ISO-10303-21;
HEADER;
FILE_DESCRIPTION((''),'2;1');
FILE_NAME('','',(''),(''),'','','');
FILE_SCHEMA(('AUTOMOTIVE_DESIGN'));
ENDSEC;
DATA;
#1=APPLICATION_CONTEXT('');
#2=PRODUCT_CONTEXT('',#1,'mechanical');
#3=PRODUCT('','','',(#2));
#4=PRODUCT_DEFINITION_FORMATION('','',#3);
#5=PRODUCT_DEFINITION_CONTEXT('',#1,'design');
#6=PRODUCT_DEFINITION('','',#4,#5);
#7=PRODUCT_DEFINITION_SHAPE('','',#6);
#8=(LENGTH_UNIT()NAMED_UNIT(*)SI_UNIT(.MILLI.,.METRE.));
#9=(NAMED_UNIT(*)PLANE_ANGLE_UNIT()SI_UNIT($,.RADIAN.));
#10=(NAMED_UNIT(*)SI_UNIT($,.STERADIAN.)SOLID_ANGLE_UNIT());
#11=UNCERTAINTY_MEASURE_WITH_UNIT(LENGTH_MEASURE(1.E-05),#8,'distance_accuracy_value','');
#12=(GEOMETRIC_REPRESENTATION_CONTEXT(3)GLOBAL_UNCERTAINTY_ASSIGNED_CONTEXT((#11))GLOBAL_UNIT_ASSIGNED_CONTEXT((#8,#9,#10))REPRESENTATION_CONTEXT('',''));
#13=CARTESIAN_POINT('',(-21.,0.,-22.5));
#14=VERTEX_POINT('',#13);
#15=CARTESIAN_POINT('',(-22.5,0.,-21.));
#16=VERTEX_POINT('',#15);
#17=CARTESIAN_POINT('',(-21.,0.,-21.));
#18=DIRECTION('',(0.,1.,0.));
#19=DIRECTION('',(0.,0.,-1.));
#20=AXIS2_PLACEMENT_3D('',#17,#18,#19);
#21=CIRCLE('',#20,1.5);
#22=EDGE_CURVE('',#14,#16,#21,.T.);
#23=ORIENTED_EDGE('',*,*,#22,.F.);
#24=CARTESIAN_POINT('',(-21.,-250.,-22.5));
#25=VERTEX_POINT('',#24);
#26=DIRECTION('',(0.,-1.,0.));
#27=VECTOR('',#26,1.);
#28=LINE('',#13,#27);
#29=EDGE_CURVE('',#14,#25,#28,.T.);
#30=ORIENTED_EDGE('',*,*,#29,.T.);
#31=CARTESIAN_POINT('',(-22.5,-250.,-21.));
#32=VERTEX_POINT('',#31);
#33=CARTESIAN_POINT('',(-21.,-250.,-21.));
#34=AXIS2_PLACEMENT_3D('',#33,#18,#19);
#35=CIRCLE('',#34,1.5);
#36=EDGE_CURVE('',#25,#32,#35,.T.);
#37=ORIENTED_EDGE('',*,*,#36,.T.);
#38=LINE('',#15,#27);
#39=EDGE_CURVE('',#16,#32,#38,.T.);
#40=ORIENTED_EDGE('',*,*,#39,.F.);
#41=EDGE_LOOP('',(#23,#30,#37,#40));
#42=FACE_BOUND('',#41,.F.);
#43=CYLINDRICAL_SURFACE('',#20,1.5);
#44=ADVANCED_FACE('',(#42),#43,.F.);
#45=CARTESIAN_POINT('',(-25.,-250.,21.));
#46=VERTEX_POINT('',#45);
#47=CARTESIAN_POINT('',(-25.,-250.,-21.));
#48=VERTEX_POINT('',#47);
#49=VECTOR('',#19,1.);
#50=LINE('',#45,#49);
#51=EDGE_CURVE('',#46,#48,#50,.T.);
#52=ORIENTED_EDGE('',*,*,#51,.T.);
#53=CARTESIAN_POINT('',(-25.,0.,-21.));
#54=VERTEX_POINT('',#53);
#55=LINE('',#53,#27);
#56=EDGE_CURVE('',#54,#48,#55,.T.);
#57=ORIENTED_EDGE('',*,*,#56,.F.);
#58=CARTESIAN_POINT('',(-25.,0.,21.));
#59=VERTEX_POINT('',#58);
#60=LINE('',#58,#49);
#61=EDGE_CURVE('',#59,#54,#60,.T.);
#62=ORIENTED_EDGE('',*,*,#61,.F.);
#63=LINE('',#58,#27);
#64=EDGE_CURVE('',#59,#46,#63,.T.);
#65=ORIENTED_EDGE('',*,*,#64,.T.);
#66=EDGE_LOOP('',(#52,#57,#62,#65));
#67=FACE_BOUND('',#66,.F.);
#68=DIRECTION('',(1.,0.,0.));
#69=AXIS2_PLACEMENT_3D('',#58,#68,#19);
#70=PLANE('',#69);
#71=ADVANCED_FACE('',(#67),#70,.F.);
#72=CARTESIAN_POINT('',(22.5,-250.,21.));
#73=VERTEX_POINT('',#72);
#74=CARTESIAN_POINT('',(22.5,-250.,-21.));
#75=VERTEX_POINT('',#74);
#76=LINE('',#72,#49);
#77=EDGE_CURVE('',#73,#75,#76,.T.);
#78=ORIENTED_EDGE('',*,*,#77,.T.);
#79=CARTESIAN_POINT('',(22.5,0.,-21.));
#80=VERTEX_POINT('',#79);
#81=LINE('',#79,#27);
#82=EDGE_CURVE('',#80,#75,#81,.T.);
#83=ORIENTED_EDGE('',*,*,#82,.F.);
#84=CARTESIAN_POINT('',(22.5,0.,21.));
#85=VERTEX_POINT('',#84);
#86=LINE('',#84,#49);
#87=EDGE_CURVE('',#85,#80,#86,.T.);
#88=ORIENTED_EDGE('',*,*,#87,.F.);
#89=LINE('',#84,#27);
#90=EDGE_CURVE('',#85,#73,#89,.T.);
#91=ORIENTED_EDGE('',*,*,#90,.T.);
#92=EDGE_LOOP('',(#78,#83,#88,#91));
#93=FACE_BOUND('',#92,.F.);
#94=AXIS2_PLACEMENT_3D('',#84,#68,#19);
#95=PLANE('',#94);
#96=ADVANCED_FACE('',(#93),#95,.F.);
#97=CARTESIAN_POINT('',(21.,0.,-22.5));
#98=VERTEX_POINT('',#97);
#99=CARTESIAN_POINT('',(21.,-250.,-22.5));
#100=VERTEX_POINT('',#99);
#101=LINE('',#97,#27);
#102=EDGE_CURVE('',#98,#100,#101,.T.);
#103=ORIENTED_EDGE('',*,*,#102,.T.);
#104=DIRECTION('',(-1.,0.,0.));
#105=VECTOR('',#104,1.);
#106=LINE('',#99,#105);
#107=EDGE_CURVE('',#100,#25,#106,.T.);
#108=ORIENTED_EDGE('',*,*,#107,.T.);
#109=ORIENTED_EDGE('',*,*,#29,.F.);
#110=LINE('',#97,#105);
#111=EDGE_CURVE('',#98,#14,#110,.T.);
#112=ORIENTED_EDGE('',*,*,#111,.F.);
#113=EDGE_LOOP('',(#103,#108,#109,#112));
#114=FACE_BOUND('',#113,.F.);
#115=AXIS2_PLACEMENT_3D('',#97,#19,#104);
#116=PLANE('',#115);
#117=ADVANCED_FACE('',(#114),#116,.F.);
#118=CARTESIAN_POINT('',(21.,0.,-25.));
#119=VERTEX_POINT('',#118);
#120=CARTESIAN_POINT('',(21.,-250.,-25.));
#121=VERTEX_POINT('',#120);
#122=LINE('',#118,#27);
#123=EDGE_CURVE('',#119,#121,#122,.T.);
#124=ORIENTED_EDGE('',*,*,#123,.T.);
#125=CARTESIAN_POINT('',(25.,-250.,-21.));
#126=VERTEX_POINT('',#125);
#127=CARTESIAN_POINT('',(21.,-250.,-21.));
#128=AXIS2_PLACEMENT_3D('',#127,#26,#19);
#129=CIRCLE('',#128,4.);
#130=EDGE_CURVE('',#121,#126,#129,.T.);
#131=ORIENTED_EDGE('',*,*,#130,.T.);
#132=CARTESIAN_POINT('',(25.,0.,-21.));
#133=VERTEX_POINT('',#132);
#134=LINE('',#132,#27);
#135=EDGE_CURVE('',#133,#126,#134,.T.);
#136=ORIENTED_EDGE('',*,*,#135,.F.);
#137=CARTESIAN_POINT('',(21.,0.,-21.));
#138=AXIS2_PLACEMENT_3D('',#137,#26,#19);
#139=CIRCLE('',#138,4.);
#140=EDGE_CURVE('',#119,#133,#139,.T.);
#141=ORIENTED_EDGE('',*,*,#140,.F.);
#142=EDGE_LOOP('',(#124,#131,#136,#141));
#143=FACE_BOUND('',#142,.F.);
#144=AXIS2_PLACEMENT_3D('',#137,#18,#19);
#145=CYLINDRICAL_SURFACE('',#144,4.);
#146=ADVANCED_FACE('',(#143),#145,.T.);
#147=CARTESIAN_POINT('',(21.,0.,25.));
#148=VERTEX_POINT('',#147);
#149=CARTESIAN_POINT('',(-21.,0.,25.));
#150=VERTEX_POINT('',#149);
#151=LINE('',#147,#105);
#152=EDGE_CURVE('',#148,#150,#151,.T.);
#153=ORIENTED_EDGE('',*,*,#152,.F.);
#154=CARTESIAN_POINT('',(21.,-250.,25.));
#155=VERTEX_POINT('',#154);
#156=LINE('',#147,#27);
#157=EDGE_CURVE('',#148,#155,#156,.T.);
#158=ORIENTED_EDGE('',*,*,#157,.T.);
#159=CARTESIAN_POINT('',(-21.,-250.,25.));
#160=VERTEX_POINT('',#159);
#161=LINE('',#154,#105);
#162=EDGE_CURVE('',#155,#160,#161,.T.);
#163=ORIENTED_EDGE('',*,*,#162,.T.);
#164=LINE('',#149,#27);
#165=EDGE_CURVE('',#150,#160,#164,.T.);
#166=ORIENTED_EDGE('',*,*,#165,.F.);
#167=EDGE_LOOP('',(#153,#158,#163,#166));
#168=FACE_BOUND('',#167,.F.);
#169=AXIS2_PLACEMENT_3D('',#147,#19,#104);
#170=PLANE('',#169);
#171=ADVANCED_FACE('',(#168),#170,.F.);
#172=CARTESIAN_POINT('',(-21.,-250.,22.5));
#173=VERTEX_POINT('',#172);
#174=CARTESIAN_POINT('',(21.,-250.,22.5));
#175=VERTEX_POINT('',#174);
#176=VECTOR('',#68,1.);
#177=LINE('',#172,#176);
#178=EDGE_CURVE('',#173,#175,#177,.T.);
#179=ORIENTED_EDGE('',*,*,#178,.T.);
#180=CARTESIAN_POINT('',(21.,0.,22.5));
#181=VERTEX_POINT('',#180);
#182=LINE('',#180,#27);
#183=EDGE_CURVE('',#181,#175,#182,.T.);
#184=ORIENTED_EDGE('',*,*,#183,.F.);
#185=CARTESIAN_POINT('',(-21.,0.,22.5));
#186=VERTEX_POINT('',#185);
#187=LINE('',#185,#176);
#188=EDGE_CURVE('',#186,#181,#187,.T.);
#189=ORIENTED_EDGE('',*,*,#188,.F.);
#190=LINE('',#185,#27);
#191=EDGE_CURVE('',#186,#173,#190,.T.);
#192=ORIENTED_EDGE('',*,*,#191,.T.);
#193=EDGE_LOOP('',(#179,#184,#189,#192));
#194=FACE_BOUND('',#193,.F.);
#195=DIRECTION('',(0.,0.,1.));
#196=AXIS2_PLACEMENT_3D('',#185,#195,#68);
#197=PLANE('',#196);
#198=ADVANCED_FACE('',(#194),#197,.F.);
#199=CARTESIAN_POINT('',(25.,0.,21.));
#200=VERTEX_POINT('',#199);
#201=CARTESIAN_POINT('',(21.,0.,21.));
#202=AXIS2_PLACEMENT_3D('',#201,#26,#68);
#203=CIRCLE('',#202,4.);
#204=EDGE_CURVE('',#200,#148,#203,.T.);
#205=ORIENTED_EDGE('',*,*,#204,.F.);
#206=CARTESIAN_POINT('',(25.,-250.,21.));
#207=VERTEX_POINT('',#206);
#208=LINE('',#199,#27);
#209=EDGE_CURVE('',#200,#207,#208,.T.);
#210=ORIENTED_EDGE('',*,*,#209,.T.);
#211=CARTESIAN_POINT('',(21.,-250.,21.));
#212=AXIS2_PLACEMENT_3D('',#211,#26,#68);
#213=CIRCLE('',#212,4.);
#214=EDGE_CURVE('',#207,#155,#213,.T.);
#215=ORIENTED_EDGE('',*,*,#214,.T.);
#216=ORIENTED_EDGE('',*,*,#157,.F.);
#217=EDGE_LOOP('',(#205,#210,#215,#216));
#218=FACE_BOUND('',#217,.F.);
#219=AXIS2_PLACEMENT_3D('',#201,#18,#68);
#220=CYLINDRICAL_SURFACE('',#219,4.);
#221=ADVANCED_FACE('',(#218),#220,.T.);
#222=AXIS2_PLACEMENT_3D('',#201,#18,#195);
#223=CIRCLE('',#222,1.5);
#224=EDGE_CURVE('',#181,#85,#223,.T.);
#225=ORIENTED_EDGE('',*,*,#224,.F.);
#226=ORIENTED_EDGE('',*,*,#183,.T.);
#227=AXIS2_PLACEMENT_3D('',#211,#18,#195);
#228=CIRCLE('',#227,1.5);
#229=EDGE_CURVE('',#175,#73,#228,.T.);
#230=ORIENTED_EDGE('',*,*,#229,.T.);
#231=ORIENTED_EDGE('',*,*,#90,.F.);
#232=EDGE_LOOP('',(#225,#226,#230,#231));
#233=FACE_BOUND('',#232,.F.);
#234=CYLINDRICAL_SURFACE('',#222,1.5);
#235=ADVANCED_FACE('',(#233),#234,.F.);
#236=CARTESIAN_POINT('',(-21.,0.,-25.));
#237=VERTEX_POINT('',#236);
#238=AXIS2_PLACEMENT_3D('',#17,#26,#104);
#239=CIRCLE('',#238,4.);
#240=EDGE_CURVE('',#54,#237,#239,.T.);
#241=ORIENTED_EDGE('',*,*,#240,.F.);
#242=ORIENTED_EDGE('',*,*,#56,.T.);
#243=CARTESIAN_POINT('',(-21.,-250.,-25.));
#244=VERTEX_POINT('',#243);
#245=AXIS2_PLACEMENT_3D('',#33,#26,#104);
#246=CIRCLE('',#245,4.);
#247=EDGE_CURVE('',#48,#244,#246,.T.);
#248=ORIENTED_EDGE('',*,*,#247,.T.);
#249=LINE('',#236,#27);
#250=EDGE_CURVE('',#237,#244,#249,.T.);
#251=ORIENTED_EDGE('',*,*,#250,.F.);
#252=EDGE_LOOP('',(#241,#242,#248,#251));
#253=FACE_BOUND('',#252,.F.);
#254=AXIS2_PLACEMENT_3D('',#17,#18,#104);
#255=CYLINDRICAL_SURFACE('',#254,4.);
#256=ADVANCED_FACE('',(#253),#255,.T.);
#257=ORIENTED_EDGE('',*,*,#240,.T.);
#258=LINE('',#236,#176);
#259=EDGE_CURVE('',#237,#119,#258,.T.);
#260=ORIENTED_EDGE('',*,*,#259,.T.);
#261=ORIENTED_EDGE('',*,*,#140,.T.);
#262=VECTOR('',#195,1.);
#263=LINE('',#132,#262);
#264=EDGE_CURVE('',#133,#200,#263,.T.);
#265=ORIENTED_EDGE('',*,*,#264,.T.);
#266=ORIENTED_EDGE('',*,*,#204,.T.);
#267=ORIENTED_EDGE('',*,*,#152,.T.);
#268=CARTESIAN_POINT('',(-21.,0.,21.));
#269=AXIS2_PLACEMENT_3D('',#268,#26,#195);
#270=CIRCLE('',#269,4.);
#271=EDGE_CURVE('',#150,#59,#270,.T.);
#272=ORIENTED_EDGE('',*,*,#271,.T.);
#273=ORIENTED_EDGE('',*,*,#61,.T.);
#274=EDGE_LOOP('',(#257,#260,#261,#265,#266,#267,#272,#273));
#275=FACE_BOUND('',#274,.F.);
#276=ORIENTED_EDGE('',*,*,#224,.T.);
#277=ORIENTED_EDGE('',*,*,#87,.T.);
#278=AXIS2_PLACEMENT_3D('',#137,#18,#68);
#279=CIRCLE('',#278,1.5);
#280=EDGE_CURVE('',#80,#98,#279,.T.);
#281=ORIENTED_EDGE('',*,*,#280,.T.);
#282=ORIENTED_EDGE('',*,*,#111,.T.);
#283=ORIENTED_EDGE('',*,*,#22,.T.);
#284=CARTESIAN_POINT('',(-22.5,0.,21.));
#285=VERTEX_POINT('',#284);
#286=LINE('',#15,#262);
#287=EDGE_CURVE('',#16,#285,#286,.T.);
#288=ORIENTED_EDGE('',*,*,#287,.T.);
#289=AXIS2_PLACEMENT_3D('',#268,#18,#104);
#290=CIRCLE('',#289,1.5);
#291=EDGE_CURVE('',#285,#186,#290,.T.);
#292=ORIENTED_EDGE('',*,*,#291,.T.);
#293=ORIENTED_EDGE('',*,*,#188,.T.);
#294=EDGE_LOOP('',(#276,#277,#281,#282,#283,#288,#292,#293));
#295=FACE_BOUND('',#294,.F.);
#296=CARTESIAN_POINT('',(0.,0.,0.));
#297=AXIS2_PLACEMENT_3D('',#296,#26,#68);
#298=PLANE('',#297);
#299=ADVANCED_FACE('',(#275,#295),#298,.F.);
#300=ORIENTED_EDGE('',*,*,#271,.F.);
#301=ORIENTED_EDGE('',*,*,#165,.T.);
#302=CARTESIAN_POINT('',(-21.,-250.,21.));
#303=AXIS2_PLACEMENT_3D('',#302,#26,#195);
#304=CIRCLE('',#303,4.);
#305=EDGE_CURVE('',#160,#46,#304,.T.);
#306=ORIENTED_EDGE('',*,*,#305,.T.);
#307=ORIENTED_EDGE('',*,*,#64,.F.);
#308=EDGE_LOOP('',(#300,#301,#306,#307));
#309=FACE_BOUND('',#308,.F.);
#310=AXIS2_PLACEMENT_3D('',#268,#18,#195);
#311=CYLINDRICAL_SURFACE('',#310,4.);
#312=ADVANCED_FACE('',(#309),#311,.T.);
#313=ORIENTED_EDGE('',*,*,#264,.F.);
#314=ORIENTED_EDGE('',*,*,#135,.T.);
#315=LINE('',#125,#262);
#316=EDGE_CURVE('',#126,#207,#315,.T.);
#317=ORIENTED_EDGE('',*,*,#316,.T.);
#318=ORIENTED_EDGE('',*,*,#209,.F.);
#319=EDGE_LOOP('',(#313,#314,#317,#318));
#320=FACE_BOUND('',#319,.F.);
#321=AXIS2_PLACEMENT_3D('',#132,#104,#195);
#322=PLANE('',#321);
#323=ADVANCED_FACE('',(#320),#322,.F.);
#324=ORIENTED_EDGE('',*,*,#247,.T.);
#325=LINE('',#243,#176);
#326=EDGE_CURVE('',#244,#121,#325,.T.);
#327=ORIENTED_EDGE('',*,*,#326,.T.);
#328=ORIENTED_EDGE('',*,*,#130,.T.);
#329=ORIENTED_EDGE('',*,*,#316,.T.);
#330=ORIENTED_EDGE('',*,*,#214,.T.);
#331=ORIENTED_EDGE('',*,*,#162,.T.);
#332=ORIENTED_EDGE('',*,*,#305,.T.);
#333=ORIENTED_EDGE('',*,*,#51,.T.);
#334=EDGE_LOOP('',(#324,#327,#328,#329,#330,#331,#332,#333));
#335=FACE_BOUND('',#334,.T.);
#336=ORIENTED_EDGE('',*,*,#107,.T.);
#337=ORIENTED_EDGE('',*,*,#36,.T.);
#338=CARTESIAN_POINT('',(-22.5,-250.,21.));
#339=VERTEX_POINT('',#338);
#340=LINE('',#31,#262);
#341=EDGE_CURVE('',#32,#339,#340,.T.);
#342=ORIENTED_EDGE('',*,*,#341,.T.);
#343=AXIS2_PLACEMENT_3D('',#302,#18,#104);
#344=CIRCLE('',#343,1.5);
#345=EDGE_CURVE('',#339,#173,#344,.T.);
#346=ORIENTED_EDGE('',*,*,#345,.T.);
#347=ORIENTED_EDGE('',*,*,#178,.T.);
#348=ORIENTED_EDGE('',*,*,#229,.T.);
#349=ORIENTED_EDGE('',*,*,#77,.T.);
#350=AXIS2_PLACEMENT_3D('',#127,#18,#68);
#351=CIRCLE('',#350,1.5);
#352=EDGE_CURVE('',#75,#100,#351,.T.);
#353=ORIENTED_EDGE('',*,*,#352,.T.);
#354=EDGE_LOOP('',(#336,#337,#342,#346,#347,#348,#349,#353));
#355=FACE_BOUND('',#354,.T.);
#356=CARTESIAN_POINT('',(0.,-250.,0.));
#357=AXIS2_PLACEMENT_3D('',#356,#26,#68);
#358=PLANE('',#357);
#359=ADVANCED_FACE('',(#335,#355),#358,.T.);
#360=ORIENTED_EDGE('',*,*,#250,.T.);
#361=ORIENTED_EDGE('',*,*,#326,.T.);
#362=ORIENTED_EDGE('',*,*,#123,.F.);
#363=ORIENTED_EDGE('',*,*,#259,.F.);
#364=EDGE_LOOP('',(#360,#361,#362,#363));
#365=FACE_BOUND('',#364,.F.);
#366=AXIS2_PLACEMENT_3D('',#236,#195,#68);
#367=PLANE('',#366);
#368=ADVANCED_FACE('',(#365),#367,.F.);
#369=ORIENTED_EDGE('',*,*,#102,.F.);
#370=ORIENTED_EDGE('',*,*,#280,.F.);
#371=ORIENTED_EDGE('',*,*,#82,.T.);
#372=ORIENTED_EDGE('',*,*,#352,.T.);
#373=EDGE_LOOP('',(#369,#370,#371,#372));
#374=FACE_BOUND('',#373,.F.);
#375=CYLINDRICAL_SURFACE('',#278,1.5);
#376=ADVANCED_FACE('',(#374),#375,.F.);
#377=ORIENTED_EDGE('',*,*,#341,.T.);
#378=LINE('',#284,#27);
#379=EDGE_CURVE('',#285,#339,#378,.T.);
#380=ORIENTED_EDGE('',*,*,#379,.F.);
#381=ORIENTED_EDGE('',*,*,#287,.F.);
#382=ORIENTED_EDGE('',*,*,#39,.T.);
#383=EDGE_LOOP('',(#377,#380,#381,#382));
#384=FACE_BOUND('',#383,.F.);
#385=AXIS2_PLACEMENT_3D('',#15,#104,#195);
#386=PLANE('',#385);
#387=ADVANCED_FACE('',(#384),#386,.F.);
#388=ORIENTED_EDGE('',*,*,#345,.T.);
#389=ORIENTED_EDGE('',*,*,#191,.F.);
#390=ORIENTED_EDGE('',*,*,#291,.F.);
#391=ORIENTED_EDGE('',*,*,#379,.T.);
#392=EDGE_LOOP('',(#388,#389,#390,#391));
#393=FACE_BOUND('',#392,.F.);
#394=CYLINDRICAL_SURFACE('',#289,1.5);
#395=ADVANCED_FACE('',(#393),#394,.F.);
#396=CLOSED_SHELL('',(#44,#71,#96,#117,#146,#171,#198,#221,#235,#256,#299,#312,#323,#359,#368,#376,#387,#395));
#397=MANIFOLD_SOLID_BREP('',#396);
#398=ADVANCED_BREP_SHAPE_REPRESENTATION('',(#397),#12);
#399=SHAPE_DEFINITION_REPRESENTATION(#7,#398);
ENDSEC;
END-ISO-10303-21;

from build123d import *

# Parameters (mm, degrees)
F1_DEPTH = 250


# Not quite as in the source:
# - a feature names something its author has since deleted; it is built from what else it names


with BuildPart() as f1:
    # F0 (on Front) → F1 (new body)
    with BuildSketch(Plane.XZ):
        with BuildLine():
            Line((21, 25), (-21, 25))
            ThreePointArc((-21, 25), (-23.8284271247, 23.8284271247), (-25, 21))
            Line((-25, 21), (-25, -21))
            ThreePointArc((-25, -21), (-23.8284271247, -23.8284271247), (-21, -25))
            Line((-21, -25), (21, -25))
            ThreePointArc((21, -25), (23.8284271247, -23.8284271247), (25, -21))
            Line((25, -21), (25, 21))
            ThreePointArc((25, 21), (23.8284271247, 23.8284271247), (21, 25))
        make_face()
        with BuildLine():
            ThreePointArc((-22.5, 21), (-22.0606601718, 22.0606601718), (-21, 22.5))
            Line((-21, 22.5), (21, 22.5))
            ThreePointArc((21, 22.5), (22.0606601718, 22.0606601718), (22.5, 21))
            Line((22.5, 21), (22.5, -21))
            ThreePointArc((22.5, -21), (22.0606601718, -22.0606601718), (21, -22.5))
            Line((21, -22.5), (-21, -22.5))
            ThreePointArc((-21, -22.5), (-22.0606601718, -22.0606601718), (-22.5, -21))
            Line((-22.5, -21), (-22.5, 21))
        make_face(mode=Mode.SUBTRACT)
    extrude(amount=F1_DEPTH)


solid = f1.part
